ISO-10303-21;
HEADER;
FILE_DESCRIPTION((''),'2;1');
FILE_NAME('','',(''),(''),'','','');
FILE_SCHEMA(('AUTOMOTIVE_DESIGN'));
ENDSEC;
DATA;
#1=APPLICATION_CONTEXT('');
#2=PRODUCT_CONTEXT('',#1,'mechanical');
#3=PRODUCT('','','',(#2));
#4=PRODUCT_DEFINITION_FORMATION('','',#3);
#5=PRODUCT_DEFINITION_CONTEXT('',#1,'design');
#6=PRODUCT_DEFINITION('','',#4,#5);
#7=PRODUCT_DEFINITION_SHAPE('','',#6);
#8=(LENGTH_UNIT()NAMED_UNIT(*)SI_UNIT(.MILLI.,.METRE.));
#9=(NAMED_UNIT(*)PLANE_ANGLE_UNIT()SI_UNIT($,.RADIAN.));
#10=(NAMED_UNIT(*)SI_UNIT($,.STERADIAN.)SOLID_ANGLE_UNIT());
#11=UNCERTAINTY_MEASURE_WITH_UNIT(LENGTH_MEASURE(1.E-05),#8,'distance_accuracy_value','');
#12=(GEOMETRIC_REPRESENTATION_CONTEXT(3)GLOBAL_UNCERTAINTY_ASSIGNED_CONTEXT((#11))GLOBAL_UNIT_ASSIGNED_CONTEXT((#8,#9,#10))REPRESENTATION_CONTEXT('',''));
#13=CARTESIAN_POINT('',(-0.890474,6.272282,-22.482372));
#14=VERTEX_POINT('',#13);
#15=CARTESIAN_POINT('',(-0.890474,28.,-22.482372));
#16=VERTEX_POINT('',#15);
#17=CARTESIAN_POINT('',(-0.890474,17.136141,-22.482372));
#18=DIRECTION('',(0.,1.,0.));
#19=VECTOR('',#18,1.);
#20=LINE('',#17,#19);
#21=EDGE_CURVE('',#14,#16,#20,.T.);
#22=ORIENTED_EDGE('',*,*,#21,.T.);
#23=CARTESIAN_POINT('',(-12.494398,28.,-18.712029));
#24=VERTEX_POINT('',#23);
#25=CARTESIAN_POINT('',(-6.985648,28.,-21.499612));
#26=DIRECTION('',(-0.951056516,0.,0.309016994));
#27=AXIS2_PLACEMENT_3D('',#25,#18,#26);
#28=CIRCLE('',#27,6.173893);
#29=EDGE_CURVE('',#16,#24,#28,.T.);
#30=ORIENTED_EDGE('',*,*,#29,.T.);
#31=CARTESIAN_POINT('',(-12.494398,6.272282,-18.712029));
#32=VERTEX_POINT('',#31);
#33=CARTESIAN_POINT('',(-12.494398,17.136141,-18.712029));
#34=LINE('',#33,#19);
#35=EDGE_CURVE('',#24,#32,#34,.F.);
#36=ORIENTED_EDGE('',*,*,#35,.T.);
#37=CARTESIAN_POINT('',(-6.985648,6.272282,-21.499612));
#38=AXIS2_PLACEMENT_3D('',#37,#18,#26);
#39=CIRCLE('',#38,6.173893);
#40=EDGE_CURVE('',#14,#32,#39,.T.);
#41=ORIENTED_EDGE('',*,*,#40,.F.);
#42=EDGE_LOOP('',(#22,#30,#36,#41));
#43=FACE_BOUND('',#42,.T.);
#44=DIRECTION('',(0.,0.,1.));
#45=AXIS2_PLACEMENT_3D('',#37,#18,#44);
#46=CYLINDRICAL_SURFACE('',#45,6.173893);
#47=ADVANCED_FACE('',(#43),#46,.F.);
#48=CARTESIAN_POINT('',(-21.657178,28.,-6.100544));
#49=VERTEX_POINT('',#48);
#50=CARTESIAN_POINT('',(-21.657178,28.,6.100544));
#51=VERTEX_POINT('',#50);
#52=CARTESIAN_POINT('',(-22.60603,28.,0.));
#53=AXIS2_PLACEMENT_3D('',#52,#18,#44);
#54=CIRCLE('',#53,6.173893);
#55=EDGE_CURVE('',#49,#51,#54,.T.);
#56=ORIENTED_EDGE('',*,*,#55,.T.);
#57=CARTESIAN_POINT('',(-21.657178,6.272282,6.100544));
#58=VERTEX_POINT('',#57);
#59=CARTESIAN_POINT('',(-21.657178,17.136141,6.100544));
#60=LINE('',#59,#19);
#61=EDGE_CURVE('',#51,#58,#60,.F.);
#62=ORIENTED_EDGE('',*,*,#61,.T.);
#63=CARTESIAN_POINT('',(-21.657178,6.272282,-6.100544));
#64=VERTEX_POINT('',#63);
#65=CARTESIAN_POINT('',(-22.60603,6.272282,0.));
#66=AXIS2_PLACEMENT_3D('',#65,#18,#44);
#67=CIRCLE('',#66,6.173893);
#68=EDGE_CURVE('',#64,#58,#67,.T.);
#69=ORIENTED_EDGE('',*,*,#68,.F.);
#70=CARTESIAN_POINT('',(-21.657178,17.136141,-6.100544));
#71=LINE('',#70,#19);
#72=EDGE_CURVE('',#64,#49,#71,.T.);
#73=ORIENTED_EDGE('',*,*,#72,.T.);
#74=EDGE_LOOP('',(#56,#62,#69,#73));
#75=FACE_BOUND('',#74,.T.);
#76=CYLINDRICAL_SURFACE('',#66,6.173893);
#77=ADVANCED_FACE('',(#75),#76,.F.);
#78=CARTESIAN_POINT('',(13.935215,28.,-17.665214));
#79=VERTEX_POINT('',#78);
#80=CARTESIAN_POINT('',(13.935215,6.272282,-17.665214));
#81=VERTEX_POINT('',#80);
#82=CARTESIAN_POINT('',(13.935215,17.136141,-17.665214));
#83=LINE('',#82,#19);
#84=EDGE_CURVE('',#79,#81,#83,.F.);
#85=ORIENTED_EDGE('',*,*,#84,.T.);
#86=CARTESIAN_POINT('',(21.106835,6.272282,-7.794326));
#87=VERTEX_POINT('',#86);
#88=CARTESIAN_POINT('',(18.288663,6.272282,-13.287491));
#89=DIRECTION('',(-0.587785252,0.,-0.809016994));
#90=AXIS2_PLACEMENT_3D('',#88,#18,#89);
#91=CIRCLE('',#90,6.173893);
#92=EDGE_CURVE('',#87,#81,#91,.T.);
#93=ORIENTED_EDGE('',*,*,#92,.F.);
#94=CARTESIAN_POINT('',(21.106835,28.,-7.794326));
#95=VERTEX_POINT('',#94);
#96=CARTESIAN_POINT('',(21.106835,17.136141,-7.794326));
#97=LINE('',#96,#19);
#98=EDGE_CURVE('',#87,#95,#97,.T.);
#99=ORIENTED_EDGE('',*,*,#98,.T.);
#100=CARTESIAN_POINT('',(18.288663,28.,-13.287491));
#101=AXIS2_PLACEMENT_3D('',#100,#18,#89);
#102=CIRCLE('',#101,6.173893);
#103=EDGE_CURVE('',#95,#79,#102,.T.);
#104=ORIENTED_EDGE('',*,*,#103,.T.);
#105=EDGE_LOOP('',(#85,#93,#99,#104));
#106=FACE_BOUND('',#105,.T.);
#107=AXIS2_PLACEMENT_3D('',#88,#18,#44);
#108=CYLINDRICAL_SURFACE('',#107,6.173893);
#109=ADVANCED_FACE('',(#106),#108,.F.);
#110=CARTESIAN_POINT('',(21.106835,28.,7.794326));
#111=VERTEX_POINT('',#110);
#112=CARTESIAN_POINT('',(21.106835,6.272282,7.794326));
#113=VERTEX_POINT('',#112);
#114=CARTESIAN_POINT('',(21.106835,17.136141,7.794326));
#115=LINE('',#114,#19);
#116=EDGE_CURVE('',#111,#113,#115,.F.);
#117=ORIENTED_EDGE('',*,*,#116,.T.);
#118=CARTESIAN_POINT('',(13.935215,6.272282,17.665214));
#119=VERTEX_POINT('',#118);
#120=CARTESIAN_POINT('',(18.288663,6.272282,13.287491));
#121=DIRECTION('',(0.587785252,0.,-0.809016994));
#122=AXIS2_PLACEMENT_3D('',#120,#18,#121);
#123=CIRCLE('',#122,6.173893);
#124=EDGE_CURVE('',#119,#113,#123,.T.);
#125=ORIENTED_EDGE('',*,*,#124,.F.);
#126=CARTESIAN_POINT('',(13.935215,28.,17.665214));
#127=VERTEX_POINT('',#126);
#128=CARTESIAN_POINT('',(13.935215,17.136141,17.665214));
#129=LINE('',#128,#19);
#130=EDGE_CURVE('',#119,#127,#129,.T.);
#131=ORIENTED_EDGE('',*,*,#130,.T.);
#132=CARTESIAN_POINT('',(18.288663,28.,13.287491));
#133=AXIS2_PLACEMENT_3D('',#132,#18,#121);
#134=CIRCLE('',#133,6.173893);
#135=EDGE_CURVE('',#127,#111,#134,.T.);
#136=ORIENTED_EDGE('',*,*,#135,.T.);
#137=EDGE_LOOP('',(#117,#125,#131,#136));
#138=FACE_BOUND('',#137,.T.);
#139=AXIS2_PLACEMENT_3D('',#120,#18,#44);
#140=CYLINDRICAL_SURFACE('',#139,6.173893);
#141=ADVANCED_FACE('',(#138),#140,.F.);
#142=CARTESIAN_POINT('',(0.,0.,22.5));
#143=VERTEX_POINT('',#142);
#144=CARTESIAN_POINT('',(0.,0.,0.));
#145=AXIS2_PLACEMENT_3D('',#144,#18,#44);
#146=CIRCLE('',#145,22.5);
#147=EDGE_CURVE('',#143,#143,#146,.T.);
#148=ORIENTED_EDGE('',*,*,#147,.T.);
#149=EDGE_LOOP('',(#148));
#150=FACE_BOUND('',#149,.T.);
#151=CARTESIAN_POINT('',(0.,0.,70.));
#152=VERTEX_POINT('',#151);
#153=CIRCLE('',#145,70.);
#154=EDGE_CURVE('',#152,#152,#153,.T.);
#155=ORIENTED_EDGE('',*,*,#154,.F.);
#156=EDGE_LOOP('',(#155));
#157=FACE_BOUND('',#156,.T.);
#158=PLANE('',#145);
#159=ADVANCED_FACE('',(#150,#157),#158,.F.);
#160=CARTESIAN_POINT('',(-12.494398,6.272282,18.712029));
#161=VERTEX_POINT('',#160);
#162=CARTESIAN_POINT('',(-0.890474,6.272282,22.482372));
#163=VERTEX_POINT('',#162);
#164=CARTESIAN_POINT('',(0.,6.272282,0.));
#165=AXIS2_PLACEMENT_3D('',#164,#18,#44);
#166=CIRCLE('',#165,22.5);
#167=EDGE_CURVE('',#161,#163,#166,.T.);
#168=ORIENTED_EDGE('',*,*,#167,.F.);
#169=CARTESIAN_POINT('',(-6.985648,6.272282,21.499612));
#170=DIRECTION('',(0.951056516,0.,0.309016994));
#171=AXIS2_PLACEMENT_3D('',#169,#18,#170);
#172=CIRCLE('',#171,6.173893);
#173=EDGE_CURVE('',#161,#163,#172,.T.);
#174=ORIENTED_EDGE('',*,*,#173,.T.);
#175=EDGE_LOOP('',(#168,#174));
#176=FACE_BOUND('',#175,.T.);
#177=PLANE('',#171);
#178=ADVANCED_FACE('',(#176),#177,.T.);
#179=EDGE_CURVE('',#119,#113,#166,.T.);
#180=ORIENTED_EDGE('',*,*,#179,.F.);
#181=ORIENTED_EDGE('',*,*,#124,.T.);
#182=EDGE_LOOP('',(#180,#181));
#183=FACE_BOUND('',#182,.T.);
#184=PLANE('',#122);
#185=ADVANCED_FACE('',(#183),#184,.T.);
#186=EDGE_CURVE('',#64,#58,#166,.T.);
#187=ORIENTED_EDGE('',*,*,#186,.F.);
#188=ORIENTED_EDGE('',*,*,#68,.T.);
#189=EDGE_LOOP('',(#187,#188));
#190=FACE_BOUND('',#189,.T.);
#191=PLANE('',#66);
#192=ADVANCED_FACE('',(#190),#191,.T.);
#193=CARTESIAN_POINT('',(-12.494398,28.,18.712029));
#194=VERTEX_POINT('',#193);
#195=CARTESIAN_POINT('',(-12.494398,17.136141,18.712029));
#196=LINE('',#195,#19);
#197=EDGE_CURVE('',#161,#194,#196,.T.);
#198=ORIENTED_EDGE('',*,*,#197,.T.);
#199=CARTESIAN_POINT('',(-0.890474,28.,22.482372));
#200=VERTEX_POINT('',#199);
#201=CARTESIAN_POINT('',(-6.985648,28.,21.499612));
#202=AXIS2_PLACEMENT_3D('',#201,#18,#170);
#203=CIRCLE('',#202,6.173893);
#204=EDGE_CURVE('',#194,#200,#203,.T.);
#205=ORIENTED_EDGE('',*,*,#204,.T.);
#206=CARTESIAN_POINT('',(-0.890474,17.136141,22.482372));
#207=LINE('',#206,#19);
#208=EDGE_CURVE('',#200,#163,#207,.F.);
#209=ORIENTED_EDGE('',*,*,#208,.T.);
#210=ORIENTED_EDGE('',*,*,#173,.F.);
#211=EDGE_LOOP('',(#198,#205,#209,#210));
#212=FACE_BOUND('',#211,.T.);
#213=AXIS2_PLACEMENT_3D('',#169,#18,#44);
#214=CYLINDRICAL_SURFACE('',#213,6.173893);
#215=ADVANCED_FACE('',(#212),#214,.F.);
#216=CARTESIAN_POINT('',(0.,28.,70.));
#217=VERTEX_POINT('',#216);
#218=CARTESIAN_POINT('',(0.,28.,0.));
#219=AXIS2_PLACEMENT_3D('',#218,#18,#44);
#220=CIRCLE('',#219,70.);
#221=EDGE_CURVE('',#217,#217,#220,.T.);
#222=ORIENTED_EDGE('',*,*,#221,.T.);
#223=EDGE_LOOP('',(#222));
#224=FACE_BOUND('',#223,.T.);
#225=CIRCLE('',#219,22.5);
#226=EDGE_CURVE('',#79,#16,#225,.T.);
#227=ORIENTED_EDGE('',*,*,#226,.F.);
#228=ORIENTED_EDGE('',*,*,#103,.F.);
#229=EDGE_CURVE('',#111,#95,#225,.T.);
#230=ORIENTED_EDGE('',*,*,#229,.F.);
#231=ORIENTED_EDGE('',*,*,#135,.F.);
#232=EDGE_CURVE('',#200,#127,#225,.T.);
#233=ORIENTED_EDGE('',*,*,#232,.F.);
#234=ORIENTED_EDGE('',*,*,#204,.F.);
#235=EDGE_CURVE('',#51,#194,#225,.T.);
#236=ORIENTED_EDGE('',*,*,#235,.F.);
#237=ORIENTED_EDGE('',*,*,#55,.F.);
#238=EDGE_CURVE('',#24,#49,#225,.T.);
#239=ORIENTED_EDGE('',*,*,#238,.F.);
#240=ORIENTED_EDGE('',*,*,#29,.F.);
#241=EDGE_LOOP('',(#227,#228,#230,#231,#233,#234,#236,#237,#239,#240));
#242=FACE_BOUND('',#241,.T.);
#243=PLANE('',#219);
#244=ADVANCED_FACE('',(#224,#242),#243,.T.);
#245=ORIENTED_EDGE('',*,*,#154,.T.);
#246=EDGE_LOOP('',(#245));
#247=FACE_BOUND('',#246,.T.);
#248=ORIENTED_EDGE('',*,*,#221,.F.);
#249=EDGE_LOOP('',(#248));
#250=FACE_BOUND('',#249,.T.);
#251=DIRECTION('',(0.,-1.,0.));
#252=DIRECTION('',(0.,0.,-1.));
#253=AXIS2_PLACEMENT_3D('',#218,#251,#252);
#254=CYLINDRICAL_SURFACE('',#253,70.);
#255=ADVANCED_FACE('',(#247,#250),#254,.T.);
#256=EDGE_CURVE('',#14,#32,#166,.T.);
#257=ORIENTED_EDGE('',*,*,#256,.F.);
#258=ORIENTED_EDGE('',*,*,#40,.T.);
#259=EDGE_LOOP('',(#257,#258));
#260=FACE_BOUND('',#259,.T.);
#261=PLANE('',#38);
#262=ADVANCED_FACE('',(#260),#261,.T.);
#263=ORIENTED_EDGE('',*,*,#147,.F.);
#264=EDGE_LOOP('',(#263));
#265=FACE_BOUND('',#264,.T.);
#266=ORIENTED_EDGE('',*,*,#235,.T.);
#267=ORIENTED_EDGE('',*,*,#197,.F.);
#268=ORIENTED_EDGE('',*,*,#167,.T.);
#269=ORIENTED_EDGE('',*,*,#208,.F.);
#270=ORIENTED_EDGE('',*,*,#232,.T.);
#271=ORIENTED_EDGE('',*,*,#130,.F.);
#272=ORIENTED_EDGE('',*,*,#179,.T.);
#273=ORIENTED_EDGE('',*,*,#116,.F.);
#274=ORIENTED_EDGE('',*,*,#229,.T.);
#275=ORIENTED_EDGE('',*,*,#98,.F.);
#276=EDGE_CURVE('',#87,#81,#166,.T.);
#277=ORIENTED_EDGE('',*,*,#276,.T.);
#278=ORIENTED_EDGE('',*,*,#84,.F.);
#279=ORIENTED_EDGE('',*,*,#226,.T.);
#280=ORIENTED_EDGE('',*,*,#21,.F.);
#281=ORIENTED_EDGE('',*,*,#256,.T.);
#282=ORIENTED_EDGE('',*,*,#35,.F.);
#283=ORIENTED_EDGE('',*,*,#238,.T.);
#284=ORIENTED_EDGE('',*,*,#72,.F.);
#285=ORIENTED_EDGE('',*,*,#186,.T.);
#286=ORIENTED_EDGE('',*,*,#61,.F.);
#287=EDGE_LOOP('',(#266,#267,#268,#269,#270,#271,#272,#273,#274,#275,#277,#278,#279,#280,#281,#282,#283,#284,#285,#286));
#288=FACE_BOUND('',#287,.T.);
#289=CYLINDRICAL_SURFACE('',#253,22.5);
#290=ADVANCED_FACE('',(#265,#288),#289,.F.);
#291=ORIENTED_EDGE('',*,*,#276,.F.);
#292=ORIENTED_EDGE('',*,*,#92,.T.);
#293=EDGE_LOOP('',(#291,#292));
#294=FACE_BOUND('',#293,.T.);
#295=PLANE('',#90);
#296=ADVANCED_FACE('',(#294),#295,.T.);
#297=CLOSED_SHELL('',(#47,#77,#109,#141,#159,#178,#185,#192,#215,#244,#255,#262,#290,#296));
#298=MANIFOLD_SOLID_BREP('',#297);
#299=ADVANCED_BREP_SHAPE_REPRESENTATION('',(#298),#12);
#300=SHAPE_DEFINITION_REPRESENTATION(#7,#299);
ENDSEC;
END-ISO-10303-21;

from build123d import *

# Parameters (mm, degrees)
SKETCH1_R           = 70
BOSS_EXTRUDE1_DEPTH = 28
SKETCH2_R           = 22.5
CUT_EXTRUDE1_DEPTH  = 103.878569197
SKETCH3_R           = 6.173893298
CUT_EXTRUDE2_DEPTH  = 21.727717711
CIRPATTERN1_COUNT   = 5


with BuildPart() as part:
    # Sketch1 → Boss-Extrude1 (new body)
    with BuildSketch(Plane(origin=(0, 0, 0), x_dir=(1, 0, 0), z_dir=(0, 1, 0))):
        Circle(SKETCH1_R)
    extrude(amount=BOSS_EXTRUDE1_DEPTH)

    # Sketch2 → Cut-Extrude1 (cut, through all)
    with BuildSketch(Plane(origin=(0, 0, 0), x_dir=(1, 0, 0), z_dir=(0, 1, 0))):
        Circle(SKETCH2_R)
    extrude(amount=CUT_EXTRUDE1_DEPTH, mode=Mode.SUBTRACT)

    # Sketch3 → Cut-Extrude2 (cut)
    with BuildSketch(Plane(origin=(0, 28, 0), x_dir=(1, 0, 0), z_dir=(0, 1, 0))):
        with Locations((-22.606030373, 0)):
            Circle(SKETCH3_R)
    cut_extrude2 = extrude(amount=-CUT_EXTRUDE2_DEPTH, mode=Mode.SUBTRACT)

    # CirPattern1: Cut-Extrude2 ×5 about axis
    cirpattern1_axis = Axis((0, 0, 0), (0, 1, 0))
    for i in range(1, CIRPATTERN1_COUNT):
        add(cut_extrude2.rotate(cirpattern1_axis, i * 360 / CIRPATTERN1_COUNT), mode=Mode.SUBTRACT)


solid = part.part
